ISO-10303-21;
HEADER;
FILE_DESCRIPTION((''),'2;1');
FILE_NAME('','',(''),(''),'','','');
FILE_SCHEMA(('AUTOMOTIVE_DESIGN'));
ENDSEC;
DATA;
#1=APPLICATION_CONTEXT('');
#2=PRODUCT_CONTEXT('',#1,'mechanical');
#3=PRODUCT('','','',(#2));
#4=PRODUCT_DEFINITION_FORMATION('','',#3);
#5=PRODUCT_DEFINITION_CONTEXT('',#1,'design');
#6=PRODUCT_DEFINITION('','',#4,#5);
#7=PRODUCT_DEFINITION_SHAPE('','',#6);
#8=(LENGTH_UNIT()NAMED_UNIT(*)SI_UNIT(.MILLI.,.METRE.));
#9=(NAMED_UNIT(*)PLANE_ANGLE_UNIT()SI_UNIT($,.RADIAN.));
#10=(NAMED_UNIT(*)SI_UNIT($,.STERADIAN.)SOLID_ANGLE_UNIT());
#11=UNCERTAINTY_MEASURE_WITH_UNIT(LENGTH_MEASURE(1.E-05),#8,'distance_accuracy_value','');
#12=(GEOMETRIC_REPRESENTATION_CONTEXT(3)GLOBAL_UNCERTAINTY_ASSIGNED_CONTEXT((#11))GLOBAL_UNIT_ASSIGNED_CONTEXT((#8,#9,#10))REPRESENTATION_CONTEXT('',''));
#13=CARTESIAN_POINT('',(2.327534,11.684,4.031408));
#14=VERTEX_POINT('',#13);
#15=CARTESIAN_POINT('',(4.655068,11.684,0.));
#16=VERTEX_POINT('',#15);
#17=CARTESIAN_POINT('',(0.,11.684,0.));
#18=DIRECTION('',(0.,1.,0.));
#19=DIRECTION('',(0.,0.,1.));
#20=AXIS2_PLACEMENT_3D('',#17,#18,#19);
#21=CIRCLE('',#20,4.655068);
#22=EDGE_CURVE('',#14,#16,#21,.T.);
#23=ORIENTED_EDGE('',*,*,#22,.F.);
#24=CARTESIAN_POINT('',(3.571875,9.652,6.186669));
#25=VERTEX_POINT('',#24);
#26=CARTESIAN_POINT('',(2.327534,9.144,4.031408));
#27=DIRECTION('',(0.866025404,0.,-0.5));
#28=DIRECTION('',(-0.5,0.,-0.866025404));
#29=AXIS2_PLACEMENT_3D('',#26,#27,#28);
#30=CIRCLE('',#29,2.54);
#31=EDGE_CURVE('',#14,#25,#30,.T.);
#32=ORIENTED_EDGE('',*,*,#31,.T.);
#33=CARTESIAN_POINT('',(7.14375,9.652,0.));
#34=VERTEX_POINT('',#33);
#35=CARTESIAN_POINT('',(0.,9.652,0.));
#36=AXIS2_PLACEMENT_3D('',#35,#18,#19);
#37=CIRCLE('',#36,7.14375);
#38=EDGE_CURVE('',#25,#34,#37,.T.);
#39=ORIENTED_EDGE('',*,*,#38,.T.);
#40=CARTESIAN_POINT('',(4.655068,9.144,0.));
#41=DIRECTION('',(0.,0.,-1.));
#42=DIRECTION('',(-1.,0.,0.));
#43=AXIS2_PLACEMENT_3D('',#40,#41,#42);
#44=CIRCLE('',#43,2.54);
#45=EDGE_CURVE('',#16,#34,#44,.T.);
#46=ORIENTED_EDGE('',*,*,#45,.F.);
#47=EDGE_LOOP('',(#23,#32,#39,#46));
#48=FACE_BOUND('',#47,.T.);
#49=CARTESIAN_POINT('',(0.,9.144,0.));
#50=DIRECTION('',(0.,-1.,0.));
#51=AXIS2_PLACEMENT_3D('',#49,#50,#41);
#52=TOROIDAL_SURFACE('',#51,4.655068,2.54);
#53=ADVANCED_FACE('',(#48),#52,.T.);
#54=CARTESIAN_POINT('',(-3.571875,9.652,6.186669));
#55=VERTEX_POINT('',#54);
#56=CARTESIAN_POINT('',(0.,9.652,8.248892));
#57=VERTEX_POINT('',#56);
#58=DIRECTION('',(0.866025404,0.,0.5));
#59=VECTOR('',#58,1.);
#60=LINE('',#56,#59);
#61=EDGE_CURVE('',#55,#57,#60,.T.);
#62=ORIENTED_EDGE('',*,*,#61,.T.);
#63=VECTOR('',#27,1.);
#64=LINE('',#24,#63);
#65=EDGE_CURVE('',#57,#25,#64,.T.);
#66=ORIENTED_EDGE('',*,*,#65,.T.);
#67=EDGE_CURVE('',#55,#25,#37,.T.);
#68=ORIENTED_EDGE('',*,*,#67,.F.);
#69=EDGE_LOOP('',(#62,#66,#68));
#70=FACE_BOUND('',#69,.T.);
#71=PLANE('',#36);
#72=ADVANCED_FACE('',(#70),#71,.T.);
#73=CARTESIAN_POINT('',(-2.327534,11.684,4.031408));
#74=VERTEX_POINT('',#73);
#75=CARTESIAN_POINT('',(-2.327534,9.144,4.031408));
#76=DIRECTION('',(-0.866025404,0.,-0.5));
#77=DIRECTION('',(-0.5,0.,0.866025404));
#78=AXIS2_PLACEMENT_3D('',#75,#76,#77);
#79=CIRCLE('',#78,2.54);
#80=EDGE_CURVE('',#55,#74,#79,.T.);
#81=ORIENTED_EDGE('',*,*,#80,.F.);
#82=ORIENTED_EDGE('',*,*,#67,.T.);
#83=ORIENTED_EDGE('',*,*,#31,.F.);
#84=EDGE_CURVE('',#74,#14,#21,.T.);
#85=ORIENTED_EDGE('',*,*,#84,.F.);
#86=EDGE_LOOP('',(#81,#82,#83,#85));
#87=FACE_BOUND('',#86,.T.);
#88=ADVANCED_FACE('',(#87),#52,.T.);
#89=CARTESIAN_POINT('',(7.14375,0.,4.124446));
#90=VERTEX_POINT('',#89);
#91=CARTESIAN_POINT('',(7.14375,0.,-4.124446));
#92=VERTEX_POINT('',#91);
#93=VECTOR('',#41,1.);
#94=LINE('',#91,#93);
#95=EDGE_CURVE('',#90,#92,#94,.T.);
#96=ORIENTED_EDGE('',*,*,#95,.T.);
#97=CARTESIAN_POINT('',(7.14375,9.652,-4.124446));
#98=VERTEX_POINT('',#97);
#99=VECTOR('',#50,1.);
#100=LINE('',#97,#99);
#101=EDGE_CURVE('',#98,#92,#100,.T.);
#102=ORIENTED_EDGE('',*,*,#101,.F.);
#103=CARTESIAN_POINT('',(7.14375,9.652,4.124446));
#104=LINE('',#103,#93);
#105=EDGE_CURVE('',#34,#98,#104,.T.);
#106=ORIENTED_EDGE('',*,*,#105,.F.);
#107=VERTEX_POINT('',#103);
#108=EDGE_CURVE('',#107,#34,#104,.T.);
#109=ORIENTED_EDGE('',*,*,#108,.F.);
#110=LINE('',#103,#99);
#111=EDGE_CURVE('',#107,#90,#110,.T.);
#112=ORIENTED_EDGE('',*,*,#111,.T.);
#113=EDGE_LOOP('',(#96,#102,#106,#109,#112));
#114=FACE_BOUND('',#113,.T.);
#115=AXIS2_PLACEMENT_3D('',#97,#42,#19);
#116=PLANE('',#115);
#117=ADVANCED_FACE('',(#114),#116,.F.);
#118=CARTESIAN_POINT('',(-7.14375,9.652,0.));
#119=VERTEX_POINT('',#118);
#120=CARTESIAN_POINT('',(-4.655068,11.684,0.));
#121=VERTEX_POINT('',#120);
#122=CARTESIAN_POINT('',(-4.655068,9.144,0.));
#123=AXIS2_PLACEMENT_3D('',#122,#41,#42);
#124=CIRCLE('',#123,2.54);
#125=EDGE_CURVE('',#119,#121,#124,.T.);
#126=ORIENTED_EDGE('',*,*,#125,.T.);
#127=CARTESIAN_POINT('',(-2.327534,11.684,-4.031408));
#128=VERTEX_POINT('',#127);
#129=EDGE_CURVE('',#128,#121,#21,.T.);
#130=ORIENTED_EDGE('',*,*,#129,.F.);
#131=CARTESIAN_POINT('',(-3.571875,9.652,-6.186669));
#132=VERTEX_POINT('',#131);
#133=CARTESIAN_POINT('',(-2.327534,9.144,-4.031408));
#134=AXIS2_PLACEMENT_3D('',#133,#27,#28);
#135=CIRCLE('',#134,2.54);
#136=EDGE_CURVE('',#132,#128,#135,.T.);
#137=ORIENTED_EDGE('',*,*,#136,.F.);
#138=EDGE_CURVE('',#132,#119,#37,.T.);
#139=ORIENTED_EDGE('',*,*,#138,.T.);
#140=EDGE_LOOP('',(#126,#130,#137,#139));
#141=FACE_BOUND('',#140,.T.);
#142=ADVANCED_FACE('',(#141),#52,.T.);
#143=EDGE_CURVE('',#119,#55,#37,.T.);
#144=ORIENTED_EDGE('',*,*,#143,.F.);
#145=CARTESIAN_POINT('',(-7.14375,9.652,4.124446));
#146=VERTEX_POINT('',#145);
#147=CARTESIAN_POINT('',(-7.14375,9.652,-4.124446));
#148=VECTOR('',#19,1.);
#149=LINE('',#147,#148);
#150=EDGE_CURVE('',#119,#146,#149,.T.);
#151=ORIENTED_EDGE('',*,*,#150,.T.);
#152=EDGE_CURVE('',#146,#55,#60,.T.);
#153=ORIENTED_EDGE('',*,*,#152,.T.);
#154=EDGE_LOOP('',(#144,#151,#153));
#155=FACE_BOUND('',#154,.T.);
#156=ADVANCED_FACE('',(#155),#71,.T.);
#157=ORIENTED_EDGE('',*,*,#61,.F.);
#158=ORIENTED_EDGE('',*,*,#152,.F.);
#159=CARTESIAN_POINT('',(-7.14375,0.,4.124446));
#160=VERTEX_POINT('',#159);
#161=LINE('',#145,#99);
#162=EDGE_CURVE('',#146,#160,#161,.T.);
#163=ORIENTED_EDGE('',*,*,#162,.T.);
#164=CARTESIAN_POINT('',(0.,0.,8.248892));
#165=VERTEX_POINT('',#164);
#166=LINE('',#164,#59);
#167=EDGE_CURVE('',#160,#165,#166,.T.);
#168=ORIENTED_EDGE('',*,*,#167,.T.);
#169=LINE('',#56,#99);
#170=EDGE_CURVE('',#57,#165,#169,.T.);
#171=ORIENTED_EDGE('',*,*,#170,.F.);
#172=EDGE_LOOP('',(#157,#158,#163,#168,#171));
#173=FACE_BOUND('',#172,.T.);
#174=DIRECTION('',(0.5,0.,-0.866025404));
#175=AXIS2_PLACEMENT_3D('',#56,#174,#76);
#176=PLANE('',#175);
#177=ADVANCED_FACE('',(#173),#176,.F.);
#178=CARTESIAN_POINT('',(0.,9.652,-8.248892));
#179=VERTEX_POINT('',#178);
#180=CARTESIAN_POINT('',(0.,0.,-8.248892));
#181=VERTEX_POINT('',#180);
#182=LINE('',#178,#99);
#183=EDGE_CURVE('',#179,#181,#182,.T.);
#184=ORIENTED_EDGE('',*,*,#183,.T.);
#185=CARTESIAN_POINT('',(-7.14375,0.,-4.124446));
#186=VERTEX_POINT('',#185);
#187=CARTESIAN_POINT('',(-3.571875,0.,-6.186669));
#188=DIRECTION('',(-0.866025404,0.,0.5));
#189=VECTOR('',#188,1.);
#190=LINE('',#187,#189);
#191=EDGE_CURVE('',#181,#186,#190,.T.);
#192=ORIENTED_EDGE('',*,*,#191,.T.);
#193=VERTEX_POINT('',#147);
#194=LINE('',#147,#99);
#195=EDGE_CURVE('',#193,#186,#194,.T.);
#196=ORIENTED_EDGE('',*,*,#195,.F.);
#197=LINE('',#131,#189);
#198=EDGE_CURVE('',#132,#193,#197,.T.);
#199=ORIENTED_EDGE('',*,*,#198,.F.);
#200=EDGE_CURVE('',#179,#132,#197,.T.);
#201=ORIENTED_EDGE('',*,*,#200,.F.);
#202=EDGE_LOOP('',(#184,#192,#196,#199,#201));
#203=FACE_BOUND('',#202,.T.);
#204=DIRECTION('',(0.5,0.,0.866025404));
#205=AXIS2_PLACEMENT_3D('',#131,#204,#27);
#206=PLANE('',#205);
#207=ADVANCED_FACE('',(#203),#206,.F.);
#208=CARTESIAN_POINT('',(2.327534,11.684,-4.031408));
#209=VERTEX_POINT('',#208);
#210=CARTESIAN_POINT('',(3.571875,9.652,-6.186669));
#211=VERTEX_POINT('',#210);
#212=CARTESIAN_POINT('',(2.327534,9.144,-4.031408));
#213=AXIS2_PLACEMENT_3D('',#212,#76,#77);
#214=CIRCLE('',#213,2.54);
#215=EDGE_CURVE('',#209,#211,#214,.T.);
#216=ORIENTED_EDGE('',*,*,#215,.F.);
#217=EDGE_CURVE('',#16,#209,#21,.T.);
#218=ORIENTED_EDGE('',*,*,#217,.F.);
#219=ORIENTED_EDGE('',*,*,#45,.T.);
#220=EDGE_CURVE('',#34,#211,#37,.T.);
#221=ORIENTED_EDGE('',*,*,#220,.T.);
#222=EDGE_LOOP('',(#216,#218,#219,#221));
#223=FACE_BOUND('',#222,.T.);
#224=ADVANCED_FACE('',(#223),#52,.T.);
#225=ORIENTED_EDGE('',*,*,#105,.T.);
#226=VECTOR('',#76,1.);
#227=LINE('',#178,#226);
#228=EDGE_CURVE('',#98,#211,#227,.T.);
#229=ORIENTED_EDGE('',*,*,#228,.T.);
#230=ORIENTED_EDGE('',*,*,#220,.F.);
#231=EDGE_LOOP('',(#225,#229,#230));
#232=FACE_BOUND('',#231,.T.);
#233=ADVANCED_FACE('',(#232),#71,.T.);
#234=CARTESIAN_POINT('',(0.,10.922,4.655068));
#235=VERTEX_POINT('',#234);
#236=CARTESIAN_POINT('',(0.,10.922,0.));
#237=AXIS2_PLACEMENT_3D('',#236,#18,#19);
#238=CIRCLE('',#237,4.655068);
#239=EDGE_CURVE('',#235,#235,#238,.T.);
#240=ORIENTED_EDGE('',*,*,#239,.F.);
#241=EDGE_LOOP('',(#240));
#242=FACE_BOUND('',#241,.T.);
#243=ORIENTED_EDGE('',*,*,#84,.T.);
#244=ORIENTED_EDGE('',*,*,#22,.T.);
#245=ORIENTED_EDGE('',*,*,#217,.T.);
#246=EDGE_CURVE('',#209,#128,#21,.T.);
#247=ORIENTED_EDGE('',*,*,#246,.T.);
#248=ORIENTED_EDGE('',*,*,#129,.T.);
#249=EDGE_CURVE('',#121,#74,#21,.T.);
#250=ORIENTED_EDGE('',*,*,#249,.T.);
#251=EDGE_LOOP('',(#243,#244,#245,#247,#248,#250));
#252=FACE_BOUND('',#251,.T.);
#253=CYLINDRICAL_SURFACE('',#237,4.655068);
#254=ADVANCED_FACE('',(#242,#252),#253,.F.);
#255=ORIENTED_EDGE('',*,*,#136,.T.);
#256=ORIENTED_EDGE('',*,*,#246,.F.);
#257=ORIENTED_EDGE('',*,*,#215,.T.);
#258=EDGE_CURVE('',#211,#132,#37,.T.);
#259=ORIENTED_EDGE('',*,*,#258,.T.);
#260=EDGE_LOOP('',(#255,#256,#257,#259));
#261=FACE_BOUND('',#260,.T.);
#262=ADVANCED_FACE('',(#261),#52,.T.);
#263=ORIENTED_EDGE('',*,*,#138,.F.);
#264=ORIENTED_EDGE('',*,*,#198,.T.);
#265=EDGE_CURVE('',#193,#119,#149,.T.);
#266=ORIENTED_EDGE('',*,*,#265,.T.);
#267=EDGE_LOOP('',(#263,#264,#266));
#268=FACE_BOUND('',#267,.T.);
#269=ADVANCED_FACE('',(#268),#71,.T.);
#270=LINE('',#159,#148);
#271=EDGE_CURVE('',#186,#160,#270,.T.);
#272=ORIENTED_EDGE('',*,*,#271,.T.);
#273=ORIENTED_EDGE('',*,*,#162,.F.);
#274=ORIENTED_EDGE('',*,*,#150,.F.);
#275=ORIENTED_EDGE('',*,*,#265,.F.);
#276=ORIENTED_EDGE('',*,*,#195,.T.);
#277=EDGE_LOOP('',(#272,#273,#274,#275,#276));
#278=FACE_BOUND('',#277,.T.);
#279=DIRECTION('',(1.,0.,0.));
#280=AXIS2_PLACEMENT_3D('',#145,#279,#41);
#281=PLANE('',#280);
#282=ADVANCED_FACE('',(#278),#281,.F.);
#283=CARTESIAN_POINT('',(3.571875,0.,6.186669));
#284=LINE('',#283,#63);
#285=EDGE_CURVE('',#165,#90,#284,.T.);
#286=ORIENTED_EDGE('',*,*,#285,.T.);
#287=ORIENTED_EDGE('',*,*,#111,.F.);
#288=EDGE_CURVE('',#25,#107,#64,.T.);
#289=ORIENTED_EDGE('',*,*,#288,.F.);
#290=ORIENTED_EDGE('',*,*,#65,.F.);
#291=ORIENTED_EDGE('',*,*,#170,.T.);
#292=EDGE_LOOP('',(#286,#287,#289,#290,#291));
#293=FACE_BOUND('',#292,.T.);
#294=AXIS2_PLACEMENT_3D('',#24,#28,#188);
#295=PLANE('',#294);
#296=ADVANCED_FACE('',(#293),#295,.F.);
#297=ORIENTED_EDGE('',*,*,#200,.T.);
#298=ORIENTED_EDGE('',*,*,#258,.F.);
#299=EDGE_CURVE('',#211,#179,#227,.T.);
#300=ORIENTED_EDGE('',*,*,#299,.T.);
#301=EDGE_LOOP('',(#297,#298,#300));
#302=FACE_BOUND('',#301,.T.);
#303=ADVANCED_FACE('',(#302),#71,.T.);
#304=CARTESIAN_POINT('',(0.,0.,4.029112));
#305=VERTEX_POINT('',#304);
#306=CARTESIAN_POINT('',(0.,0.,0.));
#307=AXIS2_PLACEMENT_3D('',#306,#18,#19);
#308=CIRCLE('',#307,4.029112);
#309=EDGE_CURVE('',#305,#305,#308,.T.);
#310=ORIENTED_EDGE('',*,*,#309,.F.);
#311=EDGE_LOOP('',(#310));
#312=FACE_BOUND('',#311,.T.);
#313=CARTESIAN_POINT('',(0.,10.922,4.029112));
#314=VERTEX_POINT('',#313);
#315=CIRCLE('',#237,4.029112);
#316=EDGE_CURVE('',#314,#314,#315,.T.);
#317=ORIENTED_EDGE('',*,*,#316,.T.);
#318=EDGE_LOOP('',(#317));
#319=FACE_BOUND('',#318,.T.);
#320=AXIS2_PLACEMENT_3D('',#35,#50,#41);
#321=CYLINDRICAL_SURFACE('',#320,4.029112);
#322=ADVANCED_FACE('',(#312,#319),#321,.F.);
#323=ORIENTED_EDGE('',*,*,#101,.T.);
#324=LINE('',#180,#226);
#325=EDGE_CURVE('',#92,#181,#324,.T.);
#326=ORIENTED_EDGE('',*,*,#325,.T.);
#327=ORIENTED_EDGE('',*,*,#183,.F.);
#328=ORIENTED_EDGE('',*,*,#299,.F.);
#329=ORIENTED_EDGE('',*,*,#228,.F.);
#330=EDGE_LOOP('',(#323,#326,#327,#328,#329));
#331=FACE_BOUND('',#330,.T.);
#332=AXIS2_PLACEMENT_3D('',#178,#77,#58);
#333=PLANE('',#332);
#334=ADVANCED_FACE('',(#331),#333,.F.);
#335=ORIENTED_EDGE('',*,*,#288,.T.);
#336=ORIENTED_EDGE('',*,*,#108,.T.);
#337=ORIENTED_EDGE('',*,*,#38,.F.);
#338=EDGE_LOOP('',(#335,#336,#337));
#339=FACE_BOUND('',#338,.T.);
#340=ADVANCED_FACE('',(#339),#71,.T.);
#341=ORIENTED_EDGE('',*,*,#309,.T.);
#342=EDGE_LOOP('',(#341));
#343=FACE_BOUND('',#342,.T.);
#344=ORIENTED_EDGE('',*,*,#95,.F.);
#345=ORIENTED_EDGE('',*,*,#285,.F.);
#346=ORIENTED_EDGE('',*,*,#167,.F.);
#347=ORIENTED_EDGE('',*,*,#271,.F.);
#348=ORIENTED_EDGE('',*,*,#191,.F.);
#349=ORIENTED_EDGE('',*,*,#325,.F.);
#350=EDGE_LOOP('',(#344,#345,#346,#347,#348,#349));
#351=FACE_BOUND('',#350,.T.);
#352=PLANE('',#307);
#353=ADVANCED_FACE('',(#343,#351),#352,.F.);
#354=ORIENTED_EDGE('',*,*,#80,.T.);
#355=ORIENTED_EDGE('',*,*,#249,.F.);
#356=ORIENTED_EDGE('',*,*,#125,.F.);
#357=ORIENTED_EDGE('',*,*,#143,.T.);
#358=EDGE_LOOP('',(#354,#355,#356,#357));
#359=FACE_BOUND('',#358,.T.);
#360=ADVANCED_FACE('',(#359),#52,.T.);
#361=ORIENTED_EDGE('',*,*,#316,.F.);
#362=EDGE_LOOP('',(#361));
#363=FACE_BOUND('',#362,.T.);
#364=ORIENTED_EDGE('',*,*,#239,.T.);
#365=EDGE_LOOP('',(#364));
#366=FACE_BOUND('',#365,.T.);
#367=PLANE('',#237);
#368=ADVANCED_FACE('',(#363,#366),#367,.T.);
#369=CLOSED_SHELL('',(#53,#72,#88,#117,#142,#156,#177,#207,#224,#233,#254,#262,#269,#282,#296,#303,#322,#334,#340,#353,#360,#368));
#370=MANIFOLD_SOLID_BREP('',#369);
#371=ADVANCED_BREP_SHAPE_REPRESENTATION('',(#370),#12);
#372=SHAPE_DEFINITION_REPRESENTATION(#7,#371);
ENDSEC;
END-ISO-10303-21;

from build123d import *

# Parameters (mm, degrees)
SKETCH1_R           = 4.029111805
BOSS_EXTRUDE3_DEPTH = 9.652
SKETCH3_R           = 7.14375
SKETCH3_R_2         = 4.029111805
BOSS_EXTRUDE4_DEPTH = 2.032
FILLET2_R           = 2.54
SKETCH4_R           = 4.655068421
CUT_EXTRUDE1_DEPTH  = 0.762


with BuildPart() as part:
    # Sketch1 → Boss-Extrude3 (new body)
    with BuildSketch(Plane(origin=(0, 0, 0), x_dir=(1, 0, 0), z_dir=(0, 1, 0))):
        Polygon((-7.14375, 4.124445986), (-7.14375, 0), (-7.14375, -4.124445986), (0, -8.248891971), (3.571875, -6.186668978), (7.14375, -4.124445986), (7.14375, 0), (7.14375, 4.124445986), (0, 8.248891971), (-3.571875, 6.186668978), align=None)
        with Locations(Location((0, 0, 0), (0, 0, 270))):
            Circle(SKETCH1_R, mode=Mode.SUBTRACT)
    extrude(amount=BOSS_EXTRUDE3_DEPTH)

    # Sketch3 → Boss-Extrude4 (add)
    with BuildSketch(Plane(origin=(0, 9.652, 0), x_dir=(1, 0, 0), z_dir=(0, 1, 0))):
        with Locations(Location((0, 0, 0), (0, 0, 60))):
            Circle(SKETCH3_R)
        with Locations(Location((0, 0, 0), (0, 0, 270))):
            Circle(SKETCH3_R_2, mode=Mode.SUBTRACT)
    extrude(amount=BOSS_EXTRUDE4_DEPTH)

    # Fillet2
    # the kernel refuses this fillet: 2.54 mm, written as the material it takes off along each edge
    with BuildSketch(Plane(origin=(0, 11.684, 0), x_dir=(0.5000000000000001, 0, -0.8660254037844386), z_dir=(0.8660254037844386, 0, 0.5000000000000001))) as fillet2_piece_1:
        with BuildLine():
            CenterArc((4.655068421, -2.54), FILLET2_R, 11.536959033, 78.463040967)
            Line((7.14375, -2.032), (7.193523632, -2.02184))
            ThreePointArc((7.193523632, -2.02184), (7.19455, -1.016), (7.19455, 0))
            Line((7.19455, 0), (7.14375, 0.0508))
            Line((7.14375, 0.0508), (4.655068421, 0.0508))
            Line((4.655068421, 0.0508), (4.655068421, 0))
        make_face()
    revolve(axis=Axis((0, 11.684, 0), (0, 1, 0)), mode=Mode.SUBTRACT)

    # Sketch4 → Cut-Extrude1 (cut)
    with BuildSketch(Plane(origin=(0, 11.684, 0), x_dir=(1, 0, 0), z_dir=(0, 1, 0))):
        with Locations(Location((0, 0, 0), (0, 0, 270))):
            Circle(SKETCH4_R)
    extrude(amount=-CUT_EXTRUDE1_DEPTH, mode=Mode.SUBTRACT)


solid = part.part
